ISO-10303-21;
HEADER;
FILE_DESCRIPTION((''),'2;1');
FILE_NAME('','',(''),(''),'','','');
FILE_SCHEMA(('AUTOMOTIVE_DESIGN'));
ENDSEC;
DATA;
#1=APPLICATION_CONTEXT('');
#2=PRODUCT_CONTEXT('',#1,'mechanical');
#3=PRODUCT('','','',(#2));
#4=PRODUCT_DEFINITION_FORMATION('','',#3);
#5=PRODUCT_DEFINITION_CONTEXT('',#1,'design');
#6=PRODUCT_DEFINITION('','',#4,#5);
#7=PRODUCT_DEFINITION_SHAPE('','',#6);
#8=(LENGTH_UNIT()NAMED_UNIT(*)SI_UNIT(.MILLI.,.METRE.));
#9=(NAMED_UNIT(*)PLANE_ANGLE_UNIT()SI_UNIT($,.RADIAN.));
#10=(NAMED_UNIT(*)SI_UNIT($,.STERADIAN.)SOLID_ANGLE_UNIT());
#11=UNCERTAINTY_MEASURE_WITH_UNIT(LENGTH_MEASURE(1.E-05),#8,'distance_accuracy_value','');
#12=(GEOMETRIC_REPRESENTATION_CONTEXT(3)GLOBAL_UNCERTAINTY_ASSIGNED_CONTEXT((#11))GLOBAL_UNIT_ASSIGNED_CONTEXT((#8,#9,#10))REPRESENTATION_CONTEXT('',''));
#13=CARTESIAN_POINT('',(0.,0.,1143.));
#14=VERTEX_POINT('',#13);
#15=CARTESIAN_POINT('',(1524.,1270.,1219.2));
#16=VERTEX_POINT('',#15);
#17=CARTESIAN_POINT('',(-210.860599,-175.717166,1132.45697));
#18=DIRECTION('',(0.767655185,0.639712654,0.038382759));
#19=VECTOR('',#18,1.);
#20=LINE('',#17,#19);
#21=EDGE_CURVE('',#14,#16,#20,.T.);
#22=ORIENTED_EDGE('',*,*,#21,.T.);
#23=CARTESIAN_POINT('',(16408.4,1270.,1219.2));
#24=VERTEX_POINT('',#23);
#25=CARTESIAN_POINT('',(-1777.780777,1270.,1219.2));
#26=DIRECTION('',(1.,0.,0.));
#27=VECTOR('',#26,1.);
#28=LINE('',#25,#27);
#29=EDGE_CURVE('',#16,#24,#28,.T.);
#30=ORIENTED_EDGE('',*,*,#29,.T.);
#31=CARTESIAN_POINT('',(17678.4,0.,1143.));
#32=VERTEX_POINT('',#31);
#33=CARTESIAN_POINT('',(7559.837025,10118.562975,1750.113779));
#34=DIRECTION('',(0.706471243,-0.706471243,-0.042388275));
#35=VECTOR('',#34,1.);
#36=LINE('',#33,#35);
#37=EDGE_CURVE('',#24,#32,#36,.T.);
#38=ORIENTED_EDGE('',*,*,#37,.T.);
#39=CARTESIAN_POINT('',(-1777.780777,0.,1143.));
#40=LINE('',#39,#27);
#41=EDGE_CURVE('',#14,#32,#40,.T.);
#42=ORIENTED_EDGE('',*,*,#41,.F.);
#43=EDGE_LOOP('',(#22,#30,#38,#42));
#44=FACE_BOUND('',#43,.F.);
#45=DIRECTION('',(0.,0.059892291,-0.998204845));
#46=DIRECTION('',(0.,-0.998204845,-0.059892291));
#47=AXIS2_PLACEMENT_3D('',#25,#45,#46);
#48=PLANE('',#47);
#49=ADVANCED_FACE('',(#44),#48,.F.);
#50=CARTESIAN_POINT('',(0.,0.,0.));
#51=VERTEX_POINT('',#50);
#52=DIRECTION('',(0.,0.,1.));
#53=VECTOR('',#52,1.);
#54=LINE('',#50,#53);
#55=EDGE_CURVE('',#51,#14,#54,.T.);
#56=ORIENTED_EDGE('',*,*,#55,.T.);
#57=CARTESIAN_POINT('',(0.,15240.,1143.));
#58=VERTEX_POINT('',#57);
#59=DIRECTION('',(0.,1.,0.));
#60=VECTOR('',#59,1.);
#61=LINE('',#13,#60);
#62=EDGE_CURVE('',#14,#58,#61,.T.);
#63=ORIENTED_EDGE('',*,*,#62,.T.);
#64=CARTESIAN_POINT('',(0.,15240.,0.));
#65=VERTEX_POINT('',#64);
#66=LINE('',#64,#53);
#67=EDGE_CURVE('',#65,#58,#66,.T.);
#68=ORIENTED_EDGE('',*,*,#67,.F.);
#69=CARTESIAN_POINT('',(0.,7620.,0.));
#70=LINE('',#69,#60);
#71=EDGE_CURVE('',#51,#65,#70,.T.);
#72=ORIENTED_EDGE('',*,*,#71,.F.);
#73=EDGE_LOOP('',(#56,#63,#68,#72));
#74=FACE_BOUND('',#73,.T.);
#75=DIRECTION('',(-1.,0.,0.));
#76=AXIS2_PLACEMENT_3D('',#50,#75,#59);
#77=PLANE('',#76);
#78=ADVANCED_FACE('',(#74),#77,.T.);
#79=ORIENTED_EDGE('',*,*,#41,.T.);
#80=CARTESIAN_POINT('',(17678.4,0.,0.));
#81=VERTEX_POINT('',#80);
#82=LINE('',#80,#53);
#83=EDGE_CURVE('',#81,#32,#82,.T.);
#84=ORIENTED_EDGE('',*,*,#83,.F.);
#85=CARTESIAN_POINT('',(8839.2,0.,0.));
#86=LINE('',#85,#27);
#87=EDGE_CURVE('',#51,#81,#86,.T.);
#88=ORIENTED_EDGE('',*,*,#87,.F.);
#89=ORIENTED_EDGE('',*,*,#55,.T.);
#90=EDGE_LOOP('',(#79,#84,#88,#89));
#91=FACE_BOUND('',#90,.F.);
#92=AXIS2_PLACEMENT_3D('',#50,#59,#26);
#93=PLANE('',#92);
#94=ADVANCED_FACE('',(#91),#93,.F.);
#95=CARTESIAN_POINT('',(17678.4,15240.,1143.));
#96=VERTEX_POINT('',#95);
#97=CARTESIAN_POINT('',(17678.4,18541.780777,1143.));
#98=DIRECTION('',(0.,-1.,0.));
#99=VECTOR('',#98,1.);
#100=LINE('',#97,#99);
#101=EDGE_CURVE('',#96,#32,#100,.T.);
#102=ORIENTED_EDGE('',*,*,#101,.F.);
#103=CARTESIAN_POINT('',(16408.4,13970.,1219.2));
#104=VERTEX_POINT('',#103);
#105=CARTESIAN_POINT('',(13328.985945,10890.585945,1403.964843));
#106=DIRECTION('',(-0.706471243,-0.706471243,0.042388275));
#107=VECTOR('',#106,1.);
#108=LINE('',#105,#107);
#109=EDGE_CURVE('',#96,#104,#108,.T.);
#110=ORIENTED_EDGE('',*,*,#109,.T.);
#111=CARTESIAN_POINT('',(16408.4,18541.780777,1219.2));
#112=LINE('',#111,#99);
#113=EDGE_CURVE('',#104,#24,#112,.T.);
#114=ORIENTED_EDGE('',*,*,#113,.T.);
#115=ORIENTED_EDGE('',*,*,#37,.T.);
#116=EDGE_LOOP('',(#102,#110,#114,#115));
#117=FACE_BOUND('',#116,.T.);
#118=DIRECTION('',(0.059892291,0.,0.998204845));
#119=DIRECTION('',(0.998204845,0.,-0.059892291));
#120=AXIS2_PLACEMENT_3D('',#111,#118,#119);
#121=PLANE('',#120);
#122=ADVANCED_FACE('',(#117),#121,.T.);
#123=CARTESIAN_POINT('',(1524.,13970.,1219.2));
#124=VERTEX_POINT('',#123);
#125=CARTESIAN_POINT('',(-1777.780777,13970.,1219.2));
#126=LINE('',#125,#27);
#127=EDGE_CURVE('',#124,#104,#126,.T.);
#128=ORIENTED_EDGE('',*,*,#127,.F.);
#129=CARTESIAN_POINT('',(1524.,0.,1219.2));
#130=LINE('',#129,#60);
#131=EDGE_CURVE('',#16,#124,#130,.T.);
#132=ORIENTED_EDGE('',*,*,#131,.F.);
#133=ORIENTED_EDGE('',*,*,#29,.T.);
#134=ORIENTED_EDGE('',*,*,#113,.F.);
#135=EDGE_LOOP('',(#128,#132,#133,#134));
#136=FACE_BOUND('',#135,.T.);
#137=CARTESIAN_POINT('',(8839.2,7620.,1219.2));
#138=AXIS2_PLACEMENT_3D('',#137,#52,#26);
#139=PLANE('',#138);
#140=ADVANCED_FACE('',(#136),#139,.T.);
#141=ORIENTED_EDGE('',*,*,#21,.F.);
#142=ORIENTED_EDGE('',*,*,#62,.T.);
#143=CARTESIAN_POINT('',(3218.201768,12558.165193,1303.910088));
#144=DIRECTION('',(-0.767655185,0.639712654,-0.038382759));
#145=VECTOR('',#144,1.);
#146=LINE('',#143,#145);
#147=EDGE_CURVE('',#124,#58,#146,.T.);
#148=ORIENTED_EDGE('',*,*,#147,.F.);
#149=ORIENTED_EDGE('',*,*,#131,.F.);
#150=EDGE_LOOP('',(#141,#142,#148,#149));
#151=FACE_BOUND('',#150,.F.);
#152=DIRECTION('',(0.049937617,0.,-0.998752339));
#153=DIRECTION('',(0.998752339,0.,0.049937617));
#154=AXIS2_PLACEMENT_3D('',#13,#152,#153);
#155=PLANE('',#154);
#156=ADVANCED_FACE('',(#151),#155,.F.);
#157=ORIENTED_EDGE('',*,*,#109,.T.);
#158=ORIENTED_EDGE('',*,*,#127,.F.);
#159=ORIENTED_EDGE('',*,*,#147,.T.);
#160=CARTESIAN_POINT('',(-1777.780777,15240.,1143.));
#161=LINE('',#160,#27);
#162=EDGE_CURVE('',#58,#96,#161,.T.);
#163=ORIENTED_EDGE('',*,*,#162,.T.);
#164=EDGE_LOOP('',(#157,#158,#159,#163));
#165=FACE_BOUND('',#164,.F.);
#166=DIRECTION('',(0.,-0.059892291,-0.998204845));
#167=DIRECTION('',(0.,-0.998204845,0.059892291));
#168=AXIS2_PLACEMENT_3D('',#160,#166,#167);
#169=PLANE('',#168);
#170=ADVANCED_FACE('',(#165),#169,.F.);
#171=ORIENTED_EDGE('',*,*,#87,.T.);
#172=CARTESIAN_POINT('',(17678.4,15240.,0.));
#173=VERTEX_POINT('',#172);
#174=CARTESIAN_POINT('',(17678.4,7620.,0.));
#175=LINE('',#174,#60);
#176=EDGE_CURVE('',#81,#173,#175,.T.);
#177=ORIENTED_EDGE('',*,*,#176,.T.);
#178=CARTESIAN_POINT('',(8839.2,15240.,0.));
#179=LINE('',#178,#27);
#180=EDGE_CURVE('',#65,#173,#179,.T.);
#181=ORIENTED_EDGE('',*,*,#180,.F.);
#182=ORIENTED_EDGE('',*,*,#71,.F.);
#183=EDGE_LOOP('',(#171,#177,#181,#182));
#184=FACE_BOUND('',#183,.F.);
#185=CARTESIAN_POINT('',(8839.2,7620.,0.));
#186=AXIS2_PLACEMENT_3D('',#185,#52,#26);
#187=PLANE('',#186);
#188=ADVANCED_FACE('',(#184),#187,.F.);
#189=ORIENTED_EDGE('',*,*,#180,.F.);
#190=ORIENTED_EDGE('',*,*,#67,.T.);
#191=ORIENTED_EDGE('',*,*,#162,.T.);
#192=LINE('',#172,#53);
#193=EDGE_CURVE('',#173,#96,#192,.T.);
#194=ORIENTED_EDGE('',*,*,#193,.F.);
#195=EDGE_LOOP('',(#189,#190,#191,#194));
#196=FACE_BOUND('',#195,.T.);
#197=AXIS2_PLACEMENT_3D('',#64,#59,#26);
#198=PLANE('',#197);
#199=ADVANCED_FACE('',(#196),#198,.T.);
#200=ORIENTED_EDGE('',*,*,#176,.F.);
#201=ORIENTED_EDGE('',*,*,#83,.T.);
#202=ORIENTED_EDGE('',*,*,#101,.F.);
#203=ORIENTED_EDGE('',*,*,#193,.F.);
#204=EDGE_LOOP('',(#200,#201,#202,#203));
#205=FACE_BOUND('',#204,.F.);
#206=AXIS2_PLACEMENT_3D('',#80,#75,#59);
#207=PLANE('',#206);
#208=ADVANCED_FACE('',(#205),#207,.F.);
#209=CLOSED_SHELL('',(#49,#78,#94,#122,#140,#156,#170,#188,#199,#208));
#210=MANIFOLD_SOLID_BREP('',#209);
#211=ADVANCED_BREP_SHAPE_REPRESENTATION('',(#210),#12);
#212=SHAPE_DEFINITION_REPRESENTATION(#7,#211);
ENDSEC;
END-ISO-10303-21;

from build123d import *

# Parameters (mm, degrees)
F0_W        = 17678.4
F0_H        = 15240
F1_DEPTH    = 1219.2
F3_DEPTH    = 15240.001
F4_T1_DEPTH = 22757.9615534728
F4_T3_DEPTH = 21843.5615534728


# Not quite as in the source:
# - a fillet or chamfer that OpenCascade refuses, or shapes differently, is made with other operations: its cross-section is extruded or revolved along the edge and cut away or added


with BuildPart() as f1:
    # F0 (on Top) → F1 (new body)
    with BuildSketch(Plane.XY):
        with Locations((8839.2, 7620)):
            Rectangle(F0_W, F0_H)
    extrude(amount=F1_DEPTH)

    # F2 (on face) → F3 (cut, through all)
    with BuildSketch(Plane.XZ):
        Polygon((0, 1219.2), (0, 1143), (1524, 1219.2), align=None)
    extrude(amount=-F3_DEPTH, mode=Mode.SUBTRACT)

    # F4: chamfer of 1270 x 76.2 on 3 edges, made by hand

    # F4_s2 → F4_t1 (cut)
    with BuildSketch(Plane.YZ.offset(-1777.7807767364)):
        Polygon((1270, 1219.2), (0, 1143), (0, 1219.2), align=None)
        Polygon((15240, 1143), (13970, 1219.2), (15240, 1219.2), align=None)
    extrude(amount=F4_T1_DEPTH, mode=Mode.SUBTRACT)

    # F4_s4 → F4_t3 (cut)
    with BuildSketch(Plane.XZ.offset(-18541.7807767364)):
        Polygon((16408.4, 1219.2), (17678.4, 1143), (17678.4, 1219.2), align=None)
    extrude(amount=F4_T3_DEPTH, mode=Mode.SUBTRACT)


solid = f1.part
